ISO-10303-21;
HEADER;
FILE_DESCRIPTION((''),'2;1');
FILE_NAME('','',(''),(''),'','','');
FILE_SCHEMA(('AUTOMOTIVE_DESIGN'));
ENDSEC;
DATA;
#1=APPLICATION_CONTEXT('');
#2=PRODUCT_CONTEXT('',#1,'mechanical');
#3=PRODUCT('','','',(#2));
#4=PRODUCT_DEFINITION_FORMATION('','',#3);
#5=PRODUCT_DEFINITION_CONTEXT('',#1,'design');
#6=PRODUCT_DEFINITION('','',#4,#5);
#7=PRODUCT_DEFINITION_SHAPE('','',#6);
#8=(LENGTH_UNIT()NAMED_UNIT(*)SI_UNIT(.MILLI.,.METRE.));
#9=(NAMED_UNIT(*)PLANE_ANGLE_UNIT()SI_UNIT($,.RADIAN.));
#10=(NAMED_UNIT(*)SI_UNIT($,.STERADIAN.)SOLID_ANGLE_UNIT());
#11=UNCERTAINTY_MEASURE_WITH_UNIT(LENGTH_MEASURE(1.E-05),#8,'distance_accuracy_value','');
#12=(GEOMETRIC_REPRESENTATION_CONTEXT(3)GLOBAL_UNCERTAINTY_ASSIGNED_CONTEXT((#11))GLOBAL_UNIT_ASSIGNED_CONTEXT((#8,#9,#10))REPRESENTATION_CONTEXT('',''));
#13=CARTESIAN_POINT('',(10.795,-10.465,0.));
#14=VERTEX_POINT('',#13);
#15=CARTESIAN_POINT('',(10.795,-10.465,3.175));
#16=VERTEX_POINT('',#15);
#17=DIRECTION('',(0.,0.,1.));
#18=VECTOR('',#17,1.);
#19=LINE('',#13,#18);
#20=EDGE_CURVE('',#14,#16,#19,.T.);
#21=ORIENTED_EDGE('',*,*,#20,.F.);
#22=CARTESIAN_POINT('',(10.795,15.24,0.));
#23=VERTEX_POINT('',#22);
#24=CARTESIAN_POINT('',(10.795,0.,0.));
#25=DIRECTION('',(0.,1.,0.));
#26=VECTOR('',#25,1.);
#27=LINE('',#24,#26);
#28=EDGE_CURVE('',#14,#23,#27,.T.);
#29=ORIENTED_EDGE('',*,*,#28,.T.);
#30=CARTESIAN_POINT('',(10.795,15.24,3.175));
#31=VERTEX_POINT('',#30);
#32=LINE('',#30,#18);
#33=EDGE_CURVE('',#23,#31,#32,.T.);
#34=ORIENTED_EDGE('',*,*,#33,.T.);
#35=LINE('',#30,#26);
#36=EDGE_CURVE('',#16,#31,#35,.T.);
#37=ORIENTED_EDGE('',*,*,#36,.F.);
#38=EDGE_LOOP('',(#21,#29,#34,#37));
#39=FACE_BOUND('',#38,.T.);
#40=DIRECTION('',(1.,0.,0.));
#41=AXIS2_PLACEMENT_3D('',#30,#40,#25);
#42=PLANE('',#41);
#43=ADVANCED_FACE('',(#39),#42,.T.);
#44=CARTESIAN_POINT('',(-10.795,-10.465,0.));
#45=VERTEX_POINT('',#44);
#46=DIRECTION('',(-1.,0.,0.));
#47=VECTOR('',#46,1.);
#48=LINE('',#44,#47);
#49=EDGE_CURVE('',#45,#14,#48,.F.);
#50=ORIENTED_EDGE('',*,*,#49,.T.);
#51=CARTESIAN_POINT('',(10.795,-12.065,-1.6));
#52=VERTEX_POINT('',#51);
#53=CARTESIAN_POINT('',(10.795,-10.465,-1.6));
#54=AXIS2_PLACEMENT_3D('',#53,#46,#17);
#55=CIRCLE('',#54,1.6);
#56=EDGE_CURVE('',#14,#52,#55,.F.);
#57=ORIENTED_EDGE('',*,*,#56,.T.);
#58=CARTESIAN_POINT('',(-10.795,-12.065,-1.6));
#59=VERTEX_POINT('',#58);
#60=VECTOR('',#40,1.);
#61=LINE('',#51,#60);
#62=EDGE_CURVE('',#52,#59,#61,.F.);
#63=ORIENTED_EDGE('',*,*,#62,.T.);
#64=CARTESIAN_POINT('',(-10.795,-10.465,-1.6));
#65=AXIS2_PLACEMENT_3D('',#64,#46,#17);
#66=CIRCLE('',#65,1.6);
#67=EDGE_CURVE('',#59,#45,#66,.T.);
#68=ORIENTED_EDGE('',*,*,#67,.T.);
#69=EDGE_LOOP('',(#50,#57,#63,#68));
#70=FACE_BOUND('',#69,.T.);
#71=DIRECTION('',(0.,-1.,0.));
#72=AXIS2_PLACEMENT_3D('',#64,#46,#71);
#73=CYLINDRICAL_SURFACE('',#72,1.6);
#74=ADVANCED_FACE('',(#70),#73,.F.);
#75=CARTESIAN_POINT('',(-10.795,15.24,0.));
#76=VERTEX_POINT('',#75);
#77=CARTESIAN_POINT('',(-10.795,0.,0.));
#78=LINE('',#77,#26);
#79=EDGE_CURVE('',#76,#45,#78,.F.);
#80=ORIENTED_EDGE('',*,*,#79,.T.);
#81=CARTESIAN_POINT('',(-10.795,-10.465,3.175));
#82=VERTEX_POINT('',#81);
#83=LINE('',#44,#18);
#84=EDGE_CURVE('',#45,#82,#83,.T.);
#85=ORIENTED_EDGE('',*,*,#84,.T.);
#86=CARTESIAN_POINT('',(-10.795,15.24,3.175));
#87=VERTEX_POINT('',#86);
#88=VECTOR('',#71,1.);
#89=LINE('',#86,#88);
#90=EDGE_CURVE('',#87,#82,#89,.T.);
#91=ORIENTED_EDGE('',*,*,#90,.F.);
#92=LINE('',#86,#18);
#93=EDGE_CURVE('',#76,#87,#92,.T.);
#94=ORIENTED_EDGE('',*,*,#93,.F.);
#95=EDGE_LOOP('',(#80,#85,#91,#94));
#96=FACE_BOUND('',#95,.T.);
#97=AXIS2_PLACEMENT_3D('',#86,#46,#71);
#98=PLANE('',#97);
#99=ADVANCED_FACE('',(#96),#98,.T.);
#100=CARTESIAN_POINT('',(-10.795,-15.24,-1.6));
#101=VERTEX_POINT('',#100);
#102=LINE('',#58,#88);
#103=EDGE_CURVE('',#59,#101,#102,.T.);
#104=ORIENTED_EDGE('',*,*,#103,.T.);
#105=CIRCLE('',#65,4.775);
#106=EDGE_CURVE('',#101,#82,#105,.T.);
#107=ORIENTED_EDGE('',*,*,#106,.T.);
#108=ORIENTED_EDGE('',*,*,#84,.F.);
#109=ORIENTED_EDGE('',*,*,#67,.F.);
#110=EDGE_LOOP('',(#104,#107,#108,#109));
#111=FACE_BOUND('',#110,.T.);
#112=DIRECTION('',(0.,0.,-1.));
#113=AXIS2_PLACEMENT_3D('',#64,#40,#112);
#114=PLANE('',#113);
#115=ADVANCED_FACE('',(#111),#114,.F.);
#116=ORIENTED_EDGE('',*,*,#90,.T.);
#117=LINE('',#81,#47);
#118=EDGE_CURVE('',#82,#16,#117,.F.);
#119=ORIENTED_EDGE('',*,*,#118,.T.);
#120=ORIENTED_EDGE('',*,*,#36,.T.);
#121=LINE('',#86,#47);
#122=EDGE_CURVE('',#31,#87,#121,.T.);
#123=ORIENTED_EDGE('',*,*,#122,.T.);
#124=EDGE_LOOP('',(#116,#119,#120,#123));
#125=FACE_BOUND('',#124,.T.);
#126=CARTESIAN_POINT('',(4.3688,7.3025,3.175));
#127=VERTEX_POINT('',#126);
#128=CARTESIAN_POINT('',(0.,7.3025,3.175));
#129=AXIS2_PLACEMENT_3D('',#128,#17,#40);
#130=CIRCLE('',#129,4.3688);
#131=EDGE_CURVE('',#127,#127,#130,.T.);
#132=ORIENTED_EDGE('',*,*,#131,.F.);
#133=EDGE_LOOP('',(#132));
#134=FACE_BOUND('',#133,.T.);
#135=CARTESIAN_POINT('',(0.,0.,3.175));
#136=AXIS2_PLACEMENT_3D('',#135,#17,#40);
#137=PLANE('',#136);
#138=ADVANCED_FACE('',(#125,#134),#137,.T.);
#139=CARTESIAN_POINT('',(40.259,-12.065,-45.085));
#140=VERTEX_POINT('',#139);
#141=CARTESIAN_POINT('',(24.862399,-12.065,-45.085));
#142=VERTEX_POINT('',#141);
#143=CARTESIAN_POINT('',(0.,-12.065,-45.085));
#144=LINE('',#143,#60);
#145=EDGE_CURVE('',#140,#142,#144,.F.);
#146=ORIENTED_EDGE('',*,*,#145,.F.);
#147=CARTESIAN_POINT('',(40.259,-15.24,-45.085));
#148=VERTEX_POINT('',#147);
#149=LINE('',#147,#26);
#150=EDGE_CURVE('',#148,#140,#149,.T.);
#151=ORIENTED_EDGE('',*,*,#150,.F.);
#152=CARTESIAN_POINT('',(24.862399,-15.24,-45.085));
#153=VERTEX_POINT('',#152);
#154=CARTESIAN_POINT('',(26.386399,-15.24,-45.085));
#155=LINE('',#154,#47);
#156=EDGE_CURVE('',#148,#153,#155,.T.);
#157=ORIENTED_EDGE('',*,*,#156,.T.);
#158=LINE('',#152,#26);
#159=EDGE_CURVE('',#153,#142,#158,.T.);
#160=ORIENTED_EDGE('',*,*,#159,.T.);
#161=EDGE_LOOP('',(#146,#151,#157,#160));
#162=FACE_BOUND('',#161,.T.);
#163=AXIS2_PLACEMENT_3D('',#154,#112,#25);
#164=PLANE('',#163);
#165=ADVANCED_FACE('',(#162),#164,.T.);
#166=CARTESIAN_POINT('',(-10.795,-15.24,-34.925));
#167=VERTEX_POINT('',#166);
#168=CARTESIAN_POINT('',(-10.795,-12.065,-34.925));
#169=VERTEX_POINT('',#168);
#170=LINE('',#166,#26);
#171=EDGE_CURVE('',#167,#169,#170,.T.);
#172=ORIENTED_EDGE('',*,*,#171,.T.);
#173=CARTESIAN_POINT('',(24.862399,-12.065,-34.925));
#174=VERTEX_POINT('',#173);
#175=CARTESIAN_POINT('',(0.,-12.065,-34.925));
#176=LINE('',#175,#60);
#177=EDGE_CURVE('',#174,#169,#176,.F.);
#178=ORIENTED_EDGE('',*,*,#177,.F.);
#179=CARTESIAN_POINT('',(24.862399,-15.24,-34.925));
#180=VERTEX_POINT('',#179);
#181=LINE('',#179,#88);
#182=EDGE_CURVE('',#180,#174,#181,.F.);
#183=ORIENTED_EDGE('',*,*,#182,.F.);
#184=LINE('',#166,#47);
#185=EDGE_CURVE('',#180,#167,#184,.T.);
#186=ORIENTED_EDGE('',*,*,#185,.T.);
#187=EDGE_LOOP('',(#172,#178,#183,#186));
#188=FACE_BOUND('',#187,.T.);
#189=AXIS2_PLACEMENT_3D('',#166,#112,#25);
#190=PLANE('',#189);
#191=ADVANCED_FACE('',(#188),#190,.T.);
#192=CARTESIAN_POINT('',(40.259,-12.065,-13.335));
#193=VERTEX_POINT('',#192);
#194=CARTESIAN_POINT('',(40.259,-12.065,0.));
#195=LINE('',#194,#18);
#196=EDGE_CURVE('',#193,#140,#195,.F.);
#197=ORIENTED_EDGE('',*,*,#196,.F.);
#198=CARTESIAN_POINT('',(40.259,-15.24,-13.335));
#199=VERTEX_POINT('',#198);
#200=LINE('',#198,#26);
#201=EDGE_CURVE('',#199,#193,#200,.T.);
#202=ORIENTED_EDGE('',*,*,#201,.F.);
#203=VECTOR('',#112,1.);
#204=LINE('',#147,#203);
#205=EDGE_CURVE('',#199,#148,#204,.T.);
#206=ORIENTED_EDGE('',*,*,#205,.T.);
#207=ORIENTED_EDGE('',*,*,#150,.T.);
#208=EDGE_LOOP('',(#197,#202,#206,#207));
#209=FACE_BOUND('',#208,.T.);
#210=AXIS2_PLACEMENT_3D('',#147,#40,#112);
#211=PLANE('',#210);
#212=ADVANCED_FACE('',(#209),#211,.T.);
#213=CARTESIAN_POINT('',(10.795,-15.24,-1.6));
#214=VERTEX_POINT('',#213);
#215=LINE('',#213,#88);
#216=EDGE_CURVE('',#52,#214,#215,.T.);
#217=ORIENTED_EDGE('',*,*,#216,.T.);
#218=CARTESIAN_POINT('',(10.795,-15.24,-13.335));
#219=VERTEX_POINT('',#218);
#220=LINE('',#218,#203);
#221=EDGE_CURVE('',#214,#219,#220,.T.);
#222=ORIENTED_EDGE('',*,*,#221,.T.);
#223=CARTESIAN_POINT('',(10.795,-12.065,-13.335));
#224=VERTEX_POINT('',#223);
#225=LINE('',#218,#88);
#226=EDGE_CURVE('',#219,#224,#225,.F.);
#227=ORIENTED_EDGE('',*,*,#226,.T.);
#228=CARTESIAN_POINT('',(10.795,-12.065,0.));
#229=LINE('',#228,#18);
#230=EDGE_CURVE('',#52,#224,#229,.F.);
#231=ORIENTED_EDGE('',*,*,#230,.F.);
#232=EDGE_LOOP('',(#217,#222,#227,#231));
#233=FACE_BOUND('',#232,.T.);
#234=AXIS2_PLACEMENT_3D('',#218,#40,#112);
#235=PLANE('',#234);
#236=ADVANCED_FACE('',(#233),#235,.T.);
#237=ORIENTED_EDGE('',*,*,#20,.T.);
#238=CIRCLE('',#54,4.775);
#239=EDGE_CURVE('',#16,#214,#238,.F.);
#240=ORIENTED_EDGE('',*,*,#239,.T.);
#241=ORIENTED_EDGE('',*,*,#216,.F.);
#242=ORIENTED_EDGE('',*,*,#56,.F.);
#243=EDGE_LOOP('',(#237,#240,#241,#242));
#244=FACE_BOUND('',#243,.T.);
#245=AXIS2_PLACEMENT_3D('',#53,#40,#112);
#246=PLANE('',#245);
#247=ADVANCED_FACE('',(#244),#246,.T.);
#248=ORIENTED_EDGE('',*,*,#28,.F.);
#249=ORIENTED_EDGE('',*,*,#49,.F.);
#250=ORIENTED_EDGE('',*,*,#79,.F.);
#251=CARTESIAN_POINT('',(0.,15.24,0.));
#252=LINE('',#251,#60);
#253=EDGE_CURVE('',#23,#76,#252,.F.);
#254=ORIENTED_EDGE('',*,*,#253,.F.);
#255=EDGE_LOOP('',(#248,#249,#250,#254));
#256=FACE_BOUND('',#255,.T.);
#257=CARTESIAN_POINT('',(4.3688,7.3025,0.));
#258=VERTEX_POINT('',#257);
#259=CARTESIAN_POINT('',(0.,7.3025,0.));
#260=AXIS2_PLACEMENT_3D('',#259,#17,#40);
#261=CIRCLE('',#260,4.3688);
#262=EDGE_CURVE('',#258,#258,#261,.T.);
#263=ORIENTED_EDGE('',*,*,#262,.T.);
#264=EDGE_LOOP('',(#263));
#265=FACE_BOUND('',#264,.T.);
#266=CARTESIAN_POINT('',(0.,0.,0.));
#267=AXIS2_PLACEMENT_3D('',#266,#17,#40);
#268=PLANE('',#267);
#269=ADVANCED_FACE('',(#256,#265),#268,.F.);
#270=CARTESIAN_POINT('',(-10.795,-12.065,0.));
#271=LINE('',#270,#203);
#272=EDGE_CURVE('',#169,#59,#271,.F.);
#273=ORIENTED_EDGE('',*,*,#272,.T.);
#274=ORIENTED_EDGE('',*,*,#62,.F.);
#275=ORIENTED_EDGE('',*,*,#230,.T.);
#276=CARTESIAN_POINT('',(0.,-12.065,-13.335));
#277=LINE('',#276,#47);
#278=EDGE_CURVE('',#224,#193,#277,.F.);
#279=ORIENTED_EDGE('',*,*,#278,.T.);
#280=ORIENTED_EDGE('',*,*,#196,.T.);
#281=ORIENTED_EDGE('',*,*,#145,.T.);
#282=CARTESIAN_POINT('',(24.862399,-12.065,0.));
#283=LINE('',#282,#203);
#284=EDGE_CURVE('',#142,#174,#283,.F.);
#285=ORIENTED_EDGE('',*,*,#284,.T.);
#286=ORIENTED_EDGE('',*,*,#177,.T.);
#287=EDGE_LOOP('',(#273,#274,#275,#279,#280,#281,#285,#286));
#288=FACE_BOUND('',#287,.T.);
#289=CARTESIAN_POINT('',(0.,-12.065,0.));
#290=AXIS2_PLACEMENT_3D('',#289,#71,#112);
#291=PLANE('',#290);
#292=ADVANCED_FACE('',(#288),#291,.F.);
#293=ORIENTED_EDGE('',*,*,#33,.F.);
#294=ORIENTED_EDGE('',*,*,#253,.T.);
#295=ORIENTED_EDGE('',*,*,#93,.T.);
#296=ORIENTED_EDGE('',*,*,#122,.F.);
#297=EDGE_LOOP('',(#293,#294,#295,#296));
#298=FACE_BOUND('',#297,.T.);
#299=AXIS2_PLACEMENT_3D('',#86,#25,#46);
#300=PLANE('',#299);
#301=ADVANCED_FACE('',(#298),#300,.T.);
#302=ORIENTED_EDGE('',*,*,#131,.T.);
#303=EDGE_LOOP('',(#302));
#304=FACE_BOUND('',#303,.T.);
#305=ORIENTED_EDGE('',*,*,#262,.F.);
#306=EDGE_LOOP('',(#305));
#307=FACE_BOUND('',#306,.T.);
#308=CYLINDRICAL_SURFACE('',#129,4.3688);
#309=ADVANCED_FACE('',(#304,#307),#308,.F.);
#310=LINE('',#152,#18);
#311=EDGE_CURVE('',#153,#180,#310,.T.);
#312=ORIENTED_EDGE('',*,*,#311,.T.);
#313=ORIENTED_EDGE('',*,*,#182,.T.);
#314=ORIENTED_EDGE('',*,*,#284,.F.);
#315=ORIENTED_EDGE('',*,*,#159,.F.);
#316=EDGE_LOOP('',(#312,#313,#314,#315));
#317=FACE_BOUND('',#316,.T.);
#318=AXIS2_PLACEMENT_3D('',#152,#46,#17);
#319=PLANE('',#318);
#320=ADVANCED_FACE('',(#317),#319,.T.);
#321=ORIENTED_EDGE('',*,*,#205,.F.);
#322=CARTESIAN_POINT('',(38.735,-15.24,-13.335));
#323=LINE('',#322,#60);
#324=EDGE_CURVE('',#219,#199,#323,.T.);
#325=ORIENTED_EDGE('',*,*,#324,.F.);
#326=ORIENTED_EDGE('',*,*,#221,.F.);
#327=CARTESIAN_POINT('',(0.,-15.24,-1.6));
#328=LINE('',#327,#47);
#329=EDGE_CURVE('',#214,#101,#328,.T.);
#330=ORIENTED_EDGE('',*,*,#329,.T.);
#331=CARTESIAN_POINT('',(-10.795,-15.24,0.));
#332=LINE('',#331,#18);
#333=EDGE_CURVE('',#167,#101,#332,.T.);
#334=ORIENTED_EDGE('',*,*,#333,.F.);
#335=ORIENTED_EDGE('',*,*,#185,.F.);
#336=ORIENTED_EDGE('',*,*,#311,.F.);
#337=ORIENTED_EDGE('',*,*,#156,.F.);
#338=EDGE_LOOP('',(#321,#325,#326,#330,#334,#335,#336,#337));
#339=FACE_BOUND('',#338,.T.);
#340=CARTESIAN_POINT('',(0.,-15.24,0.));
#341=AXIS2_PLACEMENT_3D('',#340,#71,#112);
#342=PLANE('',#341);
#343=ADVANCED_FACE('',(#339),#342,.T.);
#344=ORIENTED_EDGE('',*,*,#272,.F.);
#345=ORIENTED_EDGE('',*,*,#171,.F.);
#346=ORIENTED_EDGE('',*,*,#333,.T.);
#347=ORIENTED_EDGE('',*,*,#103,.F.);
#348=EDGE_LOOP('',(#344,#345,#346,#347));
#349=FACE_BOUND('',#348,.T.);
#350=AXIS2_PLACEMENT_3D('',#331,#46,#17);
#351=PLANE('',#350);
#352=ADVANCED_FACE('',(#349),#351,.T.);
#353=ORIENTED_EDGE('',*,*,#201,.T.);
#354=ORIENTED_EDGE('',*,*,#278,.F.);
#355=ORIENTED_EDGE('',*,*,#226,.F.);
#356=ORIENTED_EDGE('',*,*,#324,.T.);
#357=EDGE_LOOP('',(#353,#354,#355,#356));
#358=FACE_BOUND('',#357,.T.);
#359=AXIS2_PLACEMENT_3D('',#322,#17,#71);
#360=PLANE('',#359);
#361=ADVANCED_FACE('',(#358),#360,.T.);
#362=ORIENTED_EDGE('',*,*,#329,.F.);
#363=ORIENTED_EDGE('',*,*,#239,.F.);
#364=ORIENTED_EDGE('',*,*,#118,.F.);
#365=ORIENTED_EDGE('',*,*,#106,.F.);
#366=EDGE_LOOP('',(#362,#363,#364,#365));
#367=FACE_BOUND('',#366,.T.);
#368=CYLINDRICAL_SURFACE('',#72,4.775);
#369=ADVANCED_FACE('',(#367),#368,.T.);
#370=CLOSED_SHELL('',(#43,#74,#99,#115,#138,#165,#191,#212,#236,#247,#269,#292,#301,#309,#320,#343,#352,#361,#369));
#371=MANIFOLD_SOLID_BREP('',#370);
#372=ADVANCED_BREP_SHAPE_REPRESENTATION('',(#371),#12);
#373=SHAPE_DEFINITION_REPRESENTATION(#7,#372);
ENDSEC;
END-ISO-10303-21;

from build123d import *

# Parameters (mm, degrees)
SKETCH1_R                    = 4.3688
BOSS_EXTRUDE1_DEPTH          = 3.175
EDGE_FLANGE1_STRIP_W         = 15.900000204
EDGE_FLANGE1_STRIP_H         = 3.175
EDGE_FLANGE1_STRIP_CUT_DEPTH = 21.59
EDGE_FLANGE1_DEPTH           = 21.59
EDGE_FLANGE1_FLAT_DEPTH      = 3.175


# Sheet-metal steps are written as plain solids
with BuildPart() as part:
    # Sketch1 → Boss-Extrude1 (new body)
    with BuildSketch(Plane.XY):
        Polygon((-10.795, 15.24), (10.795, 15.24), (10.795, -15.24), (-10.795, -15.24), (-10.795, -1.27), align=None)
        with Locations((0, 7.3025)):
            Circle(SKETCH1_R, mode=Mode.SUBTRACT)
    extrude(amount=BOSS_EXTRUDE1_DEPTH)

    # Edge-Flange1 strip (across the edge) → Edge-Flange1 strip cut (cut)
    with BuildSketch(Plane(origin=(10.795, -15.24, 0), x_dir=(0, 1, 0), z_dir=(-1, 0, 0))):
        with Locations((-3.175, -1.5875)):
            Rectangle(EDGE_FLANGE1_STRIP_W, EDGE_FLANGE1_STRIP_H)
    extrude(amount=EDGE_FLANGE1_STRIP_CUT_DEPTH, mode=Mode.SUBTRACT)

    # Edge-Flange1 bend section (across the edge) → Edge-Flange1 (add)
    with BuildSketch(Plane(origin=(10.795, -15.24, 0), x_dir=(0, 1, 0), z_dir=(-1, 0, 0))):
        with BuildLine():
            Line((0, 1.600000102), (3.175, 1.600000102))
            ThreePointArc((3.175, 1.600000102), (3.64362918, 0.46862918), (4.775000102, 0))
            Line((4.775000102, 0), (4.775000102, -3.175))
            ThreePointArc((4.775000102, -3.175), (1.39856515, -1.77643485), (0, 1.600000102))
        make_face()
    extrude(amount=EDGE_FLANGE1_DEPTH)

    # Edge-Flange1 profile (on flange) → Edge-Flange1 flat (add)
    with BuildSketch(Plane(origin=(0, -15.24, 0), x_dir=(1, 0, 0), z_dir=(0, 1, 0))):
        Polygon((-10.795, 1.600000102), (10.795, 1.600000102), (10.795, 13.335), (33.655, 13.335), (38.735, 13.335), (40.259, 13.335), (40.259, 45.085), (38.735, 45.085), (26.386399264, 45.085), (24.862399264, 45.085), (24.862399264, 34.925), (21.306399264, 34.925), (16.226399264, 34.925), (10.795, 34.925), (-10.795, 34.925), (-10.795, 13.335), align=None)
    extrude(amount=EDGE_FLANGE1_FLAT_DEPTH)


solid = part.part
